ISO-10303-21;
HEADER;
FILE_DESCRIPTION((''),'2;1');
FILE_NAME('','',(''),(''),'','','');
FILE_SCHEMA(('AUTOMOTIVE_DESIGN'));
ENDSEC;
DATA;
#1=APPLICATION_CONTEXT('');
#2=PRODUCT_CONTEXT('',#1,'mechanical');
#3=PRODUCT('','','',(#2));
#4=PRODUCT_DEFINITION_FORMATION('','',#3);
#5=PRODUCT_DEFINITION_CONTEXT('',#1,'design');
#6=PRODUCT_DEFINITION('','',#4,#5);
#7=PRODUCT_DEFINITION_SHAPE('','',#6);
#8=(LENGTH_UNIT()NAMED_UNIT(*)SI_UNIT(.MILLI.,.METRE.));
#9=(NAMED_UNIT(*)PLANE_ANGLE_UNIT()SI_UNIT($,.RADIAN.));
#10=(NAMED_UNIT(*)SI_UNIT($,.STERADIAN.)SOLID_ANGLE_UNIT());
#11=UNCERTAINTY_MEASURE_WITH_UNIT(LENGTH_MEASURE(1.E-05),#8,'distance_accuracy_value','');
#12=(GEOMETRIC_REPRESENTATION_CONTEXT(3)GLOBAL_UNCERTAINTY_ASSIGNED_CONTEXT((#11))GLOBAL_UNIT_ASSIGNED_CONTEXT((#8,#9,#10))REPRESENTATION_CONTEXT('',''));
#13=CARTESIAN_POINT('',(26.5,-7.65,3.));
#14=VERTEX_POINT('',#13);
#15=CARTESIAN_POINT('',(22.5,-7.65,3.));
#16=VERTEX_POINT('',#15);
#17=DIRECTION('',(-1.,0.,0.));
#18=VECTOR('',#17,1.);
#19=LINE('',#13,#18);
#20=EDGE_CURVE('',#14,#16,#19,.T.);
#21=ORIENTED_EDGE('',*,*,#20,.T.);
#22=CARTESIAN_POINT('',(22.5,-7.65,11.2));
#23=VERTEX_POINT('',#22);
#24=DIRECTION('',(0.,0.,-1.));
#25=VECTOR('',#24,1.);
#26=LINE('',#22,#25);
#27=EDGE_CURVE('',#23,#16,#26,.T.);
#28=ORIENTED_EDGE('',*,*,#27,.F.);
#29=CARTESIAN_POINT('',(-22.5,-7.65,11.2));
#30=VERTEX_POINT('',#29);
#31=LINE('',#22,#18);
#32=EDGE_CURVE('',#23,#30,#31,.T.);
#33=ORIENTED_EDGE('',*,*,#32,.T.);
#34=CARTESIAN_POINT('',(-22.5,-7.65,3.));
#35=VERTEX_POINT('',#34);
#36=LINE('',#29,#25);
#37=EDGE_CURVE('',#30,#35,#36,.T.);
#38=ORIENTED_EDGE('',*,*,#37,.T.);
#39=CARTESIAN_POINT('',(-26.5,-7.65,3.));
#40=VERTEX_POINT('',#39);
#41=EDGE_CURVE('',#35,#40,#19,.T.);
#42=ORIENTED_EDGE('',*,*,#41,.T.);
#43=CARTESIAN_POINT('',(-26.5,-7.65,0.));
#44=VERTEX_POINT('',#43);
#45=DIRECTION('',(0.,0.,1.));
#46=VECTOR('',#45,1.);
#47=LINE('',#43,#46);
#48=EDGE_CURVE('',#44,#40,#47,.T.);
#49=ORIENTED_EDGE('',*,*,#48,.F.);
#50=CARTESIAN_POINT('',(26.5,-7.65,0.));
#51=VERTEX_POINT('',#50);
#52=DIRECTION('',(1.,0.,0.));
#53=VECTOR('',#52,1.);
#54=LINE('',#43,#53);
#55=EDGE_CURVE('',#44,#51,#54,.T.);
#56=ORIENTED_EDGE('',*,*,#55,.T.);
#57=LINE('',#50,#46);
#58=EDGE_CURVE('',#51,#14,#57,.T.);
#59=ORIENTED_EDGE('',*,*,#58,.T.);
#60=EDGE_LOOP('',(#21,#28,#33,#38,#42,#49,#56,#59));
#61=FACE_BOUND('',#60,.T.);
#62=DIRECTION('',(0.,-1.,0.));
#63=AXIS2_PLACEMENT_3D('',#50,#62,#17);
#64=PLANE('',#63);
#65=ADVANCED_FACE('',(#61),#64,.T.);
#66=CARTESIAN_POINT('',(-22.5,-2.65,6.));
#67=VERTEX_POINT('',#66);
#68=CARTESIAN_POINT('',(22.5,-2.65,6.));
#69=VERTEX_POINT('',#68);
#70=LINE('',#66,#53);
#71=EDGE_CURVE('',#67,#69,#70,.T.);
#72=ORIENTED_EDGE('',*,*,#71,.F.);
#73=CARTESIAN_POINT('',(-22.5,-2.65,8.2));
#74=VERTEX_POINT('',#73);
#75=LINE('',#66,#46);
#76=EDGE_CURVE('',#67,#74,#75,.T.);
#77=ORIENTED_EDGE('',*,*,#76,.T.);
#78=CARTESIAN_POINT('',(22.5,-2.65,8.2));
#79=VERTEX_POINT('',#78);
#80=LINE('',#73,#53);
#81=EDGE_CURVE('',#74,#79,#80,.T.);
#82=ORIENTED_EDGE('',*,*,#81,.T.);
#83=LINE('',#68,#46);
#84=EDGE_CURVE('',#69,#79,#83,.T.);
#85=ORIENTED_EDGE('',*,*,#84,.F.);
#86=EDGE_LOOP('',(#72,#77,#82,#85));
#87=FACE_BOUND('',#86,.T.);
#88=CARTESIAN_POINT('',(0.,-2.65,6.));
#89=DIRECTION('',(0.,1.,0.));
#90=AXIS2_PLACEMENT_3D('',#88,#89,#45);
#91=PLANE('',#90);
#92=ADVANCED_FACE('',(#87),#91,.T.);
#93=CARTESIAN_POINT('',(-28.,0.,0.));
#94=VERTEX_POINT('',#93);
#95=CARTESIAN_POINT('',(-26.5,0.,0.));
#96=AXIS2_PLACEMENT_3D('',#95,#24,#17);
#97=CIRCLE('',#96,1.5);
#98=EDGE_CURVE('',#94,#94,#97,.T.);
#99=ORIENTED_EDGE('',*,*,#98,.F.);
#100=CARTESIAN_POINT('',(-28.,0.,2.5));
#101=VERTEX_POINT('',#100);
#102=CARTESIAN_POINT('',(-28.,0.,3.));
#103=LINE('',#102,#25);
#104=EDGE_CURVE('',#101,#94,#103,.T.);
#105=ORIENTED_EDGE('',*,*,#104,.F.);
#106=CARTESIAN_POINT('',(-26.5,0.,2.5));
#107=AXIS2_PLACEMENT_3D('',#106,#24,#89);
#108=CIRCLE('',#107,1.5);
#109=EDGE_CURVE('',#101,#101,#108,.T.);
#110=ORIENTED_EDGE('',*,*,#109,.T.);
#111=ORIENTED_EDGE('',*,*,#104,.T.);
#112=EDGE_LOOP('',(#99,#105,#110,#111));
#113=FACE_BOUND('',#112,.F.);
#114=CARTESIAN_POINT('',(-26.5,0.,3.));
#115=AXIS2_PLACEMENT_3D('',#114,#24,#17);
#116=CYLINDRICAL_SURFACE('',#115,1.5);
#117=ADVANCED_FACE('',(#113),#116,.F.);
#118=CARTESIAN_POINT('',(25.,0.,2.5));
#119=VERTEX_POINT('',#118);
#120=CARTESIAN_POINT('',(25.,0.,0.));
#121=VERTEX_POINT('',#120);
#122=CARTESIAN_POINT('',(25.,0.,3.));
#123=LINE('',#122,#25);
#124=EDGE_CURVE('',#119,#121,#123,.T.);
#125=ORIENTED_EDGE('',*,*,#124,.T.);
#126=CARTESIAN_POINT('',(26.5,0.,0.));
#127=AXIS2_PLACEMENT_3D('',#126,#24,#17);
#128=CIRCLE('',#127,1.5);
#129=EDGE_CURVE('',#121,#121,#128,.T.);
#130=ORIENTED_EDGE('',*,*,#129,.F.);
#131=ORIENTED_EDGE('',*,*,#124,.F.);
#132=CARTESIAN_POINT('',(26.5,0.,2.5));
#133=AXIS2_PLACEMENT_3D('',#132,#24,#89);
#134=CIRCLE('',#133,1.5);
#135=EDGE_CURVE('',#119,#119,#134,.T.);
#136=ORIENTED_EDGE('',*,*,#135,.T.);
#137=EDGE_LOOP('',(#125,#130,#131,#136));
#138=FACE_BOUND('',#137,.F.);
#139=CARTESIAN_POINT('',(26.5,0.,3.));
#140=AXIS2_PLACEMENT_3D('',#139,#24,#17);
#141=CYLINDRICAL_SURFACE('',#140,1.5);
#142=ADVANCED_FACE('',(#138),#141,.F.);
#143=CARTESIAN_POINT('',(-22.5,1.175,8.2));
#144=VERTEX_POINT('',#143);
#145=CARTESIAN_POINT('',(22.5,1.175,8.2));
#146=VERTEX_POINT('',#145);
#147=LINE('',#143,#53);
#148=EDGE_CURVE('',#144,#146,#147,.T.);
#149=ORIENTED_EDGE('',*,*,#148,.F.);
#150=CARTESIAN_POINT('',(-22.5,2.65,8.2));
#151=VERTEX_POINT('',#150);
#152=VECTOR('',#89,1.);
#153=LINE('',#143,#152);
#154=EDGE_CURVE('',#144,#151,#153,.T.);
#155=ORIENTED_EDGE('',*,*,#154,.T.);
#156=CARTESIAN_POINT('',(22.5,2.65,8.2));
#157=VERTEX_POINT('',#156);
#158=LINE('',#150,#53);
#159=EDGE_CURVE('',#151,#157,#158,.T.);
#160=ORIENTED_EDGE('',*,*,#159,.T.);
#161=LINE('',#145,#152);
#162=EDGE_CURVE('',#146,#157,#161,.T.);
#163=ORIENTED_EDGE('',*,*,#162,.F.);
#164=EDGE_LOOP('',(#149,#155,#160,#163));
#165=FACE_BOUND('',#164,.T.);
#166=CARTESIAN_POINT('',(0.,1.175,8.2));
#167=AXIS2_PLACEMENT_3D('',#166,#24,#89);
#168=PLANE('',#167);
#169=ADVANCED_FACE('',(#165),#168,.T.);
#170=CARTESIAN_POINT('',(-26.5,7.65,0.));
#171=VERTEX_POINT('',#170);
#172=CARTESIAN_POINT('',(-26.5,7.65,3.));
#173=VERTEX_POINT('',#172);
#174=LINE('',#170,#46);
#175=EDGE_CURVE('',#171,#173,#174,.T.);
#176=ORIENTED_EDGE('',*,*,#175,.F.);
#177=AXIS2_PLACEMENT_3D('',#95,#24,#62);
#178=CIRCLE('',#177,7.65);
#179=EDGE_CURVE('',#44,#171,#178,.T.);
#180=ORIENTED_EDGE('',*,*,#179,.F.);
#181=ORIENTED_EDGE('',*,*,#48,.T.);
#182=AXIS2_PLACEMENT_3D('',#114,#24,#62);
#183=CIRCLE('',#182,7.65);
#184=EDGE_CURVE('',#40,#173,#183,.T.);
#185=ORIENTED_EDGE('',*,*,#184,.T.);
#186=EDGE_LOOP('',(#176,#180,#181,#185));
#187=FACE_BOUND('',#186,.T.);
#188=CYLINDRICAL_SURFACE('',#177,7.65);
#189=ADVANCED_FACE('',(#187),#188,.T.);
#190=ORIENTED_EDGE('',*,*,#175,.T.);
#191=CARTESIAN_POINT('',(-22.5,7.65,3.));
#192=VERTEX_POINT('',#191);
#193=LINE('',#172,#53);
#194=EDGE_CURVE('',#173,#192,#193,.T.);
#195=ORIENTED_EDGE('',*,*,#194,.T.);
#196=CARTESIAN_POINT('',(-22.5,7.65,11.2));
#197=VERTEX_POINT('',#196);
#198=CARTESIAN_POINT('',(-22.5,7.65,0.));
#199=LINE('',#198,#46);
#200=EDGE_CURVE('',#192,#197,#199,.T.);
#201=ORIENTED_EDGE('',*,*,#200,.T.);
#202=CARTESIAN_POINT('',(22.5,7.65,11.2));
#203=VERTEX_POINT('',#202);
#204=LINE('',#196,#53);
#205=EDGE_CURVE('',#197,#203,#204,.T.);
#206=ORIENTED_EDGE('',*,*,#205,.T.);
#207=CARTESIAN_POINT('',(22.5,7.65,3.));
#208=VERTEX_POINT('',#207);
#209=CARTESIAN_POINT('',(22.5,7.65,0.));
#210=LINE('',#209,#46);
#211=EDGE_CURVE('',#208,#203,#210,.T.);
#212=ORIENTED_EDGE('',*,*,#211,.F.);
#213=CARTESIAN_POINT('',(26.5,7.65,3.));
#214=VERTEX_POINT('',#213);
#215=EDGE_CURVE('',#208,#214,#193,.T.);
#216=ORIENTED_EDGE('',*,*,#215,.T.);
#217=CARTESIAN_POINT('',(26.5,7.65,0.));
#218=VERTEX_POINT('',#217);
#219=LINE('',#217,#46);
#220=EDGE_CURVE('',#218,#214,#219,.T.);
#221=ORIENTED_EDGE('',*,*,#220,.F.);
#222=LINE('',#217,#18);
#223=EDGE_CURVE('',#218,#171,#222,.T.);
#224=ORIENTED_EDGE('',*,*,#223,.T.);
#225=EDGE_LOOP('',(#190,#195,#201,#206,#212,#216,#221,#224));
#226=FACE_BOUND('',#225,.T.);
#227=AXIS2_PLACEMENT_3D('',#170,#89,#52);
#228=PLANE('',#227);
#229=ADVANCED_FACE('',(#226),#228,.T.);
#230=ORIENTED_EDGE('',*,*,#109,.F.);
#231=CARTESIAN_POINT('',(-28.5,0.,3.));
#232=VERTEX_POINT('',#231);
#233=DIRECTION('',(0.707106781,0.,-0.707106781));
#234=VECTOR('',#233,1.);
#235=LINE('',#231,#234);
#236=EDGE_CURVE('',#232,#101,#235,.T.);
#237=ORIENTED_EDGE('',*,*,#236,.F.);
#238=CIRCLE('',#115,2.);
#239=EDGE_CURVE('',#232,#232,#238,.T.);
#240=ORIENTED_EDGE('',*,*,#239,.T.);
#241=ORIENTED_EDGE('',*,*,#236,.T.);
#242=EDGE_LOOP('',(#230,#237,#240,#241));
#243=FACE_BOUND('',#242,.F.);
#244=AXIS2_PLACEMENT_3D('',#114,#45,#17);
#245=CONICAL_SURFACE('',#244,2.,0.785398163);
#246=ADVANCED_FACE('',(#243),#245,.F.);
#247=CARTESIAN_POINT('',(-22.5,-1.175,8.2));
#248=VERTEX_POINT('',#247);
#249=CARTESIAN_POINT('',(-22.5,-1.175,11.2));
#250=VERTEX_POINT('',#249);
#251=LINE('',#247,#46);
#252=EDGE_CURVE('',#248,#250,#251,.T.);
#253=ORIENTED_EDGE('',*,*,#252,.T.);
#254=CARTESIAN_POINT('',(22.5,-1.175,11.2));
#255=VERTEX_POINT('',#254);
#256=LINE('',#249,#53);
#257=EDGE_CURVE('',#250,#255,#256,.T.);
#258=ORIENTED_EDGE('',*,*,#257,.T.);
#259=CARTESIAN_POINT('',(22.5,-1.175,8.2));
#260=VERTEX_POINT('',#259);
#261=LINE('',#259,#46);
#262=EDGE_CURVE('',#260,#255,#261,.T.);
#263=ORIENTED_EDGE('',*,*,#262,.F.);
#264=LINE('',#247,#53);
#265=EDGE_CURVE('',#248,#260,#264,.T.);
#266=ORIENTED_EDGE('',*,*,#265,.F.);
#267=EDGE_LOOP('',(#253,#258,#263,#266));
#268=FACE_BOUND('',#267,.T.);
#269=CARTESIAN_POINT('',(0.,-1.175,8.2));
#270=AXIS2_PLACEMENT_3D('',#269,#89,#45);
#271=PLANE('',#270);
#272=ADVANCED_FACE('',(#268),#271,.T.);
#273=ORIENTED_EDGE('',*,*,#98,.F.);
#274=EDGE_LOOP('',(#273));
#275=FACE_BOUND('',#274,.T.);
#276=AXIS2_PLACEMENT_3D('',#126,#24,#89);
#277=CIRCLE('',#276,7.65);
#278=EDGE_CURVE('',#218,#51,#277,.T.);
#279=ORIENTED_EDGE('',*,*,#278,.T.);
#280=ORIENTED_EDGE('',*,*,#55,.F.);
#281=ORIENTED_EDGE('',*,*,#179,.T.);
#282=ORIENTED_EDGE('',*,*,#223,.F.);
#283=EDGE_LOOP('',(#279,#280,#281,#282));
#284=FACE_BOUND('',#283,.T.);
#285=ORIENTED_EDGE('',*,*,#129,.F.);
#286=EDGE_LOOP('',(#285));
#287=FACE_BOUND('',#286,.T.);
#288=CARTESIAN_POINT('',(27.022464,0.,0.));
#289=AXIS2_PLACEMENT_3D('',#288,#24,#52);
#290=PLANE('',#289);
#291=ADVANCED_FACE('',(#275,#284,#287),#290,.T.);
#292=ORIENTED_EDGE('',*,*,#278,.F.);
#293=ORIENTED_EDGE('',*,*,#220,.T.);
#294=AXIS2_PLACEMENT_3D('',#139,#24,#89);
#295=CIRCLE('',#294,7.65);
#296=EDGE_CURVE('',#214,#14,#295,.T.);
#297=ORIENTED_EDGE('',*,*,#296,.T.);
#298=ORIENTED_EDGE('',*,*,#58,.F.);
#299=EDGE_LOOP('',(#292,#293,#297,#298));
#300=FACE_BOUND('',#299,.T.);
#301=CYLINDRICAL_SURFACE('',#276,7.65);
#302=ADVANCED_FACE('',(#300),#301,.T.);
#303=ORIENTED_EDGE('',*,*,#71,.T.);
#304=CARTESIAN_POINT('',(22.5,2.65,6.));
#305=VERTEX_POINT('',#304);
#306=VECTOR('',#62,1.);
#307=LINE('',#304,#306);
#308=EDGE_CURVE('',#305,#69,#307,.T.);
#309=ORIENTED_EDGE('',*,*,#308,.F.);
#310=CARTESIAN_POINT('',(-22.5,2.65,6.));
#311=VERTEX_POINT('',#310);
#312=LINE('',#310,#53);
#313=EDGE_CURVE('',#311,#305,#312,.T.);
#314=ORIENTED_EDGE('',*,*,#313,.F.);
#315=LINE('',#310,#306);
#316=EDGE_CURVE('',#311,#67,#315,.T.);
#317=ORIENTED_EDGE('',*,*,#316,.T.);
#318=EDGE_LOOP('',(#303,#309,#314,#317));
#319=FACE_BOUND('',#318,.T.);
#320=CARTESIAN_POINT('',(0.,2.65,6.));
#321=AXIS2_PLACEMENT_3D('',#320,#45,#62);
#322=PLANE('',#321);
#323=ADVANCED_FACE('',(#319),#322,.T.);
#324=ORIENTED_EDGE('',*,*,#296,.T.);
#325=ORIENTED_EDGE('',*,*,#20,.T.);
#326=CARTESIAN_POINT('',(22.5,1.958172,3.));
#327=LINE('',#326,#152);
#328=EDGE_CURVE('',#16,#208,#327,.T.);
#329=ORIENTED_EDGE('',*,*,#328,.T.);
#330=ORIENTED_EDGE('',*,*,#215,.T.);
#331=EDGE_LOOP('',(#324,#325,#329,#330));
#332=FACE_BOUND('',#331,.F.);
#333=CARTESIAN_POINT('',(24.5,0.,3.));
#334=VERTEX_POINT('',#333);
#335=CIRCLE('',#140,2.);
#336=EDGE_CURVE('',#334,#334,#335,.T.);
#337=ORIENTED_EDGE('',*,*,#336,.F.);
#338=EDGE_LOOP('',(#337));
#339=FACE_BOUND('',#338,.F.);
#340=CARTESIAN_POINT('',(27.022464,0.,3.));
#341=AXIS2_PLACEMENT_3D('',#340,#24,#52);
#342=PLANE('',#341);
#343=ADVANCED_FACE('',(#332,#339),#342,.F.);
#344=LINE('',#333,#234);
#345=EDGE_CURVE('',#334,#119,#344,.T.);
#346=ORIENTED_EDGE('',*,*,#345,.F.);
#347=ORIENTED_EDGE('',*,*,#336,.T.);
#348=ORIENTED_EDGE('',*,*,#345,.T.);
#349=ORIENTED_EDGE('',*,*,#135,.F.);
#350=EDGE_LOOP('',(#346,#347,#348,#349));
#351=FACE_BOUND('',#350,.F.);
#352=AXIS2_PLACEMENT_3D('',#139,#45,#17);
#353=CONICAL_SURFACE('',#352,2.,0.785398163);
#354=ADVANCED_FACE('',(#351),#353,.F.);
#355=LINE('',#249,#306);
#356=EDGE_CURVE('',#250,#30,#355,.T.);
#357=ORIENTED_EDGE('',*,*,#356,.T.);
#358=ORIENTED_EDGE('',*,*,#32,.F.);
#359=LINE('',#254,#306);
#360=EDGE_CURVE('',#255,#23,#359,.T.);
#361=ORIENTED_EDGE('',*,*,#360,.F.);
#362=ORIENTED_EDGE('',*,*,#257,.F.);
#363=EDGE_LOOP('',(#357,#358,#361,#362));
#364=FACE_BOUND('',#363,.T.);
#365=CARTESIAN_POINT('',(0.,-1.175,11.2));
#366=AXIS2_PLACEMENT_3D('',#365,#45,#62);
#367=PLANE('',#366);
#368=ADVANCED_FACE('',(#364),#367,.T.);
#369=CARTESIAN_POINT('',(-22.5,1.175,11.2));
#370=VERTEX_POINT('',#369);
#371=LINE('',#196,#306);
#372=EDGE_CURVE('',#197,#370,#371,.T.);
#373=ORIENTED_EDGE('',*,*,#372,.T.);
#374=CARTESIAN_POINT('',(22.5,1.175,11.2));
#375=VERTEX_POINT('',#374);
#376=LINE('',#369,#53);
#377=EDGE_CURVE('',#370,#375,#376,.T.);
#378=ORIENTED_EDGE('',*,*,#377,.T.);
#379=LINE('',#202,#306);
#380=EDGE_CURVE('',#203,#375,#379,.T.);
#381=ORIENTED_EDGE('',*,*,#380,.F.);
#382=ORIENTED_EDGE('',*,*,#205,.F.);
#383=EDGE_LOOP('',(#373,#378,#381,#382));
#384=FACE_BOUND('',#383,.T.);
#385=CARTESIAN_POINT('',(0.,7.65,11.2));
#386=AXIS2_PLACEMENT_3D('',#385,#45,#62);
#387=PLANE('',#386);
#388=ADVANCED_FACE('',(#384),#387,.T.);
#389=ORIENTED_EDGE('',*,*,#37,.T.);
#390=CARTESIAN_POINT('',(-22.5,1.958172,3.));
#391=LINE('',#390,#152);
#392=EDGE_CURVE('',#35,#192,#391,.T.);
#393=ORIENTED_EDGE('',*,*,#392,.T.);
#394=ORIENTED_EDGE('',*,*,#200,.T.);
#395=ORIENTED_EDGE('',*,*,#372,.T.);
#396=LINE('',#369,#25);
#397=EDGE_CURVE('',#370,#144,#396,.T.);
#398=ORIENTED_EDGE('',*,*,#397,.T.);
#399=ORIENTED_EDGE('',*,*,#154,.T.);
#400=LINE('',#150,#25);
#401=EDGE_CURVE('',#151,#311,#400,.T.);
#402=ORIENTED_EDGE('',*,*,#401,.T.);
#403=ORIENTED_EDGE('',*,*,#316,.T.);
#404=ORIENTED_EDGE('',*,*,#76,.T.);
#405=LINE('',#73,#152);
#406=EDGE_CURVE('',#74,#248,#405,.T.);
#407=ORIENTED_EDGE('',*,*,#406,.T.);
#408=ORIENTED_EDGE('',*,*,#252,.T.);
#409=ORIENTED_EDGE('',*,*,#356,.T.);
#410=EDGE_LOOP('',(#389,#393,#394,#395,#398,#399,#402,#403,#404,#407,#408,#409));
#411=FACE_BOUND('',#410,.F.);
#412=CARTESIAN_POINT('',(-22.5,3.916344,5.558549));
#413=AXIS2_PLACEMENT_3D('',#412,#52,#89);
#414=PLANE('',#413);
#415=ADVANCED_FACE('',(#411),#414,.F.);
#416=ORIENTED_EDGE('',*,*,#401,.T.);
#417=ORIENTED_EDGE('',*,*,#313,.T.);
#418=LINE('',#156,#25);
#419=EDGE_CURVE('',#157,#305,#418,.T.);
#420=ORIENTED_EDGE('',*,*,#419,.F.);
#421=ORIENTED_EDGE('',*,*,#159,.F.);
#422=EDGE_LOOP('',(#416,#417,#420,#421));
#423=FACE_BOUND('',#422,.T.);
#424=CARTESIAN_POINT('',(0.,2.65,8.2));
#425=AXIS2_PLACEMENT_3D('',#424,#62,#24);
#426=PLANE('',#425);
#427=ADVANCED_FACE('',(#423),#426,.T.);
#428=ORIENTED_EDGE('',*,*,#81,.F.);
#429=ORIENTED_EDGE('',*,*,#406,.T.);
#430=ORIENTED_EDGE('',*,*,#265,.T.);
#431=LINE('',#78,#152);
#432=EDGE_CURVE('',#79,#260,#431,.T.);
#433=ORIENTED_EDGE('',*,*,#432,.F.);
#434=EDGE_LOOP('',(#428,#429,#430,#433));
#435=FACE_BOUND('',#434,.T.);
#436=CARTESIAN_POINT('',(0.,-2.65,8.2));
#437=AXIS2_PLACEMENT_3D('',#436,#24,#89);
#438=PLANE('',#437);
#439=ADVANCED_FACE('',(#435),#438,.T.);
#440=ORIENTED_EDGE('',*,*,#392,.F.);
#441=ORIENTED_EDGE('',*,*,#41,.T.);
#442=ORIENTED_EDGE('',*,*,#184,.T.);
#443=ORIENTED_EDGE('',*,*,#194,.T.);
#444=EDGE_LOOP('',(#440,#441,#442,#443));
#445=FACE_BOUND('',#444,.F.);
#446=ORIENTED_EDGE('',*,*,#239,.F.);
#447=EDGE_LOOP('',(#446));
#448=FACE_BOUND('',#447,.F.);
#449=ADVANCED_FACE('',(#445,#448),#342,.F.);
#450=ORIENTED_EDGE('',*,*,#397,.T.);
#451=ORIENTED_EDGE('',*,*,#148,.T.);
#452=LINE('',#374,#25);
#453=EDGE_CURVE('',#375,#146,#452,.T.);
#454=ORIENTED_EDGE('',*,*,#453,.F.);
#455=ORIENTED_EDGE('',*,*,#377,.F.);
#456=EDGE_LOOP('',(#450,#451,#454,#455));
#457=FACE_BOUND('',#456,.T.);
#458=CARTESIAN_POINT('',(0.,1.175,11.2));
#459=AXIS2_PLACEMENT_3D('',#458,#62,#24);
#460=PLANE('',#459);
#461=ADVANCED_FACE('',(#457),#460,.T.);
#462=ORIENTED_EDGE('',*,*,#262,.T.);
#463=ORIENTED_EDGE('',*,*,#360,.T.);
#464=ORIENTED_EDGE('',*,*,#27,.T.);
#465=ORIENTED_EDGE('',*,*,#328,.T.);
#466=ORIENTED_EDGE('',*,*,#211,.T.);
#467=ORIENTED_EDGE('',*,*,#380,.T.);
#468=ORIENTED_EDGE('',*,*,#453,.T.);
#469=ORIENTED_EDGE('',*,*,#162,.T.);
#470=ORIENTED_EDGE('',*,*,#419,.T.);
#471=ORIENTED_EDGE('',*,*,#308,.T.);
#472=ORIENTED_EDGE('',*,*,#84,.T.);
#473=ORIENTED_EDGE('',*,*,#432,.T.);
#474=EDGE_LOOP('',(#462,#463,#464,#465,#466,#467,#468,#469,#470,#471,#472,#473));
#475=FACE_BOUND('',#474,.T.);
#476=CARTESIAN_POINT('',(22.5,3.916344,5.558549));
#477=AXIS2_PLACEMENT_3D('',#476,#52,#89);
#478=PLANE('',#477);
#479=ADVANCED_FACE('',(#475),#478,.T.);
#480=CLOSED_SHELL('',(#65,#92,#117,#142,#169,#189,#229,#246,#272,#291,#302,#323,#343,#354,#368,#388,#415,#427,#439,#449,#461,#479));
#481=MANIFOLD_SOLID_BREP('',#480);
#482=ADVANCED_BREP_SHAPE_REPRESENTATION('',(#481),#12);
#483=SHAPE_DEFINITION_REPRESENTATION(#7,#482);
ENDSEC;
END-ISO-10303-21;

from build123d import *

# Parameters (mm, degrees)
F1_DEPTH       = 22.5
F2_W           = 45
F2_H           = 15.3
F3_DEPTH       = 3
F5_D           = 3
F5_DEPTH       = 4
F5_CSINK_D     = 4
F5_CSINK_ANGLE = 90
F5_TIP         = 0.9012909285


with BuildPart() as f1:
    # F0 (on Right) → F1 (new body, symmetric)
    with BuildSketch(Plane.YZ):
        Polygon((7.65, 0), (7.65, 11.2), (1.175, 11.2), (1.175, 8.2), (2.65, 8.2), (2.65, 6), (0, 6), (0, 0), align=None)
        Polygon((-7.65, 0), (0, 0), (0, 6), (-2.65, 6), (-2.65, 8.2), (-1.175, 8.2), (-1.175, 11.2), (-7.65, 11.2), align=None)
    extrude(amount=F1_DEPTH, both=True)

    # F2 (on face) → F3 (join)
    with BuildSketch(Plane(origin=(0, 0, 0), x_dir=(1, 0, 0), z_dir=(0, 0, -1))):
        with BuildLine():
            Line((22.5, 7.65), (22.5, -7.65))
            Line((22.5, -7.65), (26.5, -7.65))
            ThreePointArc((26.5, -7.65), (34.15, 0), (26.5, 7.65))
            Line((26.5, 7.65), (22.5, 7.65))
        make_face()
        Rectangle(F2_W, F2_H)
        with BuildLine():
            Line((-26.5, -7.65), (-22.5, -7.65))
            Line((-22.5, -7.65), (-22.5, 7.65))
            Line((-22.5, 7.65), (-26.5, 7.65))
            ThreePointArc((-26.5, 7.65), (-34.15, 0), (-26.5, -7.65))
        make_face()
    extrude(amount=-F3_DEPTH)

    # F5
    with Locations(Plane.XY.offset(3)):
        with Locations((26.5, 0), (-26.5, 0)):
            CounterSinkHole(F5_D / 2, F5_CSINK_D / 2, depth=F5_DEPTH, counter_sink_angle=F5_CSINK_ANGLE)
            with Locations((0, 0, -(F5_DEPTH + F5_TIP / 2))):  # 118° drill point
                Cone(0, F5_D / 2, F5_TIP, mode=Mode.SUBTRACT)


solid = f1.part
